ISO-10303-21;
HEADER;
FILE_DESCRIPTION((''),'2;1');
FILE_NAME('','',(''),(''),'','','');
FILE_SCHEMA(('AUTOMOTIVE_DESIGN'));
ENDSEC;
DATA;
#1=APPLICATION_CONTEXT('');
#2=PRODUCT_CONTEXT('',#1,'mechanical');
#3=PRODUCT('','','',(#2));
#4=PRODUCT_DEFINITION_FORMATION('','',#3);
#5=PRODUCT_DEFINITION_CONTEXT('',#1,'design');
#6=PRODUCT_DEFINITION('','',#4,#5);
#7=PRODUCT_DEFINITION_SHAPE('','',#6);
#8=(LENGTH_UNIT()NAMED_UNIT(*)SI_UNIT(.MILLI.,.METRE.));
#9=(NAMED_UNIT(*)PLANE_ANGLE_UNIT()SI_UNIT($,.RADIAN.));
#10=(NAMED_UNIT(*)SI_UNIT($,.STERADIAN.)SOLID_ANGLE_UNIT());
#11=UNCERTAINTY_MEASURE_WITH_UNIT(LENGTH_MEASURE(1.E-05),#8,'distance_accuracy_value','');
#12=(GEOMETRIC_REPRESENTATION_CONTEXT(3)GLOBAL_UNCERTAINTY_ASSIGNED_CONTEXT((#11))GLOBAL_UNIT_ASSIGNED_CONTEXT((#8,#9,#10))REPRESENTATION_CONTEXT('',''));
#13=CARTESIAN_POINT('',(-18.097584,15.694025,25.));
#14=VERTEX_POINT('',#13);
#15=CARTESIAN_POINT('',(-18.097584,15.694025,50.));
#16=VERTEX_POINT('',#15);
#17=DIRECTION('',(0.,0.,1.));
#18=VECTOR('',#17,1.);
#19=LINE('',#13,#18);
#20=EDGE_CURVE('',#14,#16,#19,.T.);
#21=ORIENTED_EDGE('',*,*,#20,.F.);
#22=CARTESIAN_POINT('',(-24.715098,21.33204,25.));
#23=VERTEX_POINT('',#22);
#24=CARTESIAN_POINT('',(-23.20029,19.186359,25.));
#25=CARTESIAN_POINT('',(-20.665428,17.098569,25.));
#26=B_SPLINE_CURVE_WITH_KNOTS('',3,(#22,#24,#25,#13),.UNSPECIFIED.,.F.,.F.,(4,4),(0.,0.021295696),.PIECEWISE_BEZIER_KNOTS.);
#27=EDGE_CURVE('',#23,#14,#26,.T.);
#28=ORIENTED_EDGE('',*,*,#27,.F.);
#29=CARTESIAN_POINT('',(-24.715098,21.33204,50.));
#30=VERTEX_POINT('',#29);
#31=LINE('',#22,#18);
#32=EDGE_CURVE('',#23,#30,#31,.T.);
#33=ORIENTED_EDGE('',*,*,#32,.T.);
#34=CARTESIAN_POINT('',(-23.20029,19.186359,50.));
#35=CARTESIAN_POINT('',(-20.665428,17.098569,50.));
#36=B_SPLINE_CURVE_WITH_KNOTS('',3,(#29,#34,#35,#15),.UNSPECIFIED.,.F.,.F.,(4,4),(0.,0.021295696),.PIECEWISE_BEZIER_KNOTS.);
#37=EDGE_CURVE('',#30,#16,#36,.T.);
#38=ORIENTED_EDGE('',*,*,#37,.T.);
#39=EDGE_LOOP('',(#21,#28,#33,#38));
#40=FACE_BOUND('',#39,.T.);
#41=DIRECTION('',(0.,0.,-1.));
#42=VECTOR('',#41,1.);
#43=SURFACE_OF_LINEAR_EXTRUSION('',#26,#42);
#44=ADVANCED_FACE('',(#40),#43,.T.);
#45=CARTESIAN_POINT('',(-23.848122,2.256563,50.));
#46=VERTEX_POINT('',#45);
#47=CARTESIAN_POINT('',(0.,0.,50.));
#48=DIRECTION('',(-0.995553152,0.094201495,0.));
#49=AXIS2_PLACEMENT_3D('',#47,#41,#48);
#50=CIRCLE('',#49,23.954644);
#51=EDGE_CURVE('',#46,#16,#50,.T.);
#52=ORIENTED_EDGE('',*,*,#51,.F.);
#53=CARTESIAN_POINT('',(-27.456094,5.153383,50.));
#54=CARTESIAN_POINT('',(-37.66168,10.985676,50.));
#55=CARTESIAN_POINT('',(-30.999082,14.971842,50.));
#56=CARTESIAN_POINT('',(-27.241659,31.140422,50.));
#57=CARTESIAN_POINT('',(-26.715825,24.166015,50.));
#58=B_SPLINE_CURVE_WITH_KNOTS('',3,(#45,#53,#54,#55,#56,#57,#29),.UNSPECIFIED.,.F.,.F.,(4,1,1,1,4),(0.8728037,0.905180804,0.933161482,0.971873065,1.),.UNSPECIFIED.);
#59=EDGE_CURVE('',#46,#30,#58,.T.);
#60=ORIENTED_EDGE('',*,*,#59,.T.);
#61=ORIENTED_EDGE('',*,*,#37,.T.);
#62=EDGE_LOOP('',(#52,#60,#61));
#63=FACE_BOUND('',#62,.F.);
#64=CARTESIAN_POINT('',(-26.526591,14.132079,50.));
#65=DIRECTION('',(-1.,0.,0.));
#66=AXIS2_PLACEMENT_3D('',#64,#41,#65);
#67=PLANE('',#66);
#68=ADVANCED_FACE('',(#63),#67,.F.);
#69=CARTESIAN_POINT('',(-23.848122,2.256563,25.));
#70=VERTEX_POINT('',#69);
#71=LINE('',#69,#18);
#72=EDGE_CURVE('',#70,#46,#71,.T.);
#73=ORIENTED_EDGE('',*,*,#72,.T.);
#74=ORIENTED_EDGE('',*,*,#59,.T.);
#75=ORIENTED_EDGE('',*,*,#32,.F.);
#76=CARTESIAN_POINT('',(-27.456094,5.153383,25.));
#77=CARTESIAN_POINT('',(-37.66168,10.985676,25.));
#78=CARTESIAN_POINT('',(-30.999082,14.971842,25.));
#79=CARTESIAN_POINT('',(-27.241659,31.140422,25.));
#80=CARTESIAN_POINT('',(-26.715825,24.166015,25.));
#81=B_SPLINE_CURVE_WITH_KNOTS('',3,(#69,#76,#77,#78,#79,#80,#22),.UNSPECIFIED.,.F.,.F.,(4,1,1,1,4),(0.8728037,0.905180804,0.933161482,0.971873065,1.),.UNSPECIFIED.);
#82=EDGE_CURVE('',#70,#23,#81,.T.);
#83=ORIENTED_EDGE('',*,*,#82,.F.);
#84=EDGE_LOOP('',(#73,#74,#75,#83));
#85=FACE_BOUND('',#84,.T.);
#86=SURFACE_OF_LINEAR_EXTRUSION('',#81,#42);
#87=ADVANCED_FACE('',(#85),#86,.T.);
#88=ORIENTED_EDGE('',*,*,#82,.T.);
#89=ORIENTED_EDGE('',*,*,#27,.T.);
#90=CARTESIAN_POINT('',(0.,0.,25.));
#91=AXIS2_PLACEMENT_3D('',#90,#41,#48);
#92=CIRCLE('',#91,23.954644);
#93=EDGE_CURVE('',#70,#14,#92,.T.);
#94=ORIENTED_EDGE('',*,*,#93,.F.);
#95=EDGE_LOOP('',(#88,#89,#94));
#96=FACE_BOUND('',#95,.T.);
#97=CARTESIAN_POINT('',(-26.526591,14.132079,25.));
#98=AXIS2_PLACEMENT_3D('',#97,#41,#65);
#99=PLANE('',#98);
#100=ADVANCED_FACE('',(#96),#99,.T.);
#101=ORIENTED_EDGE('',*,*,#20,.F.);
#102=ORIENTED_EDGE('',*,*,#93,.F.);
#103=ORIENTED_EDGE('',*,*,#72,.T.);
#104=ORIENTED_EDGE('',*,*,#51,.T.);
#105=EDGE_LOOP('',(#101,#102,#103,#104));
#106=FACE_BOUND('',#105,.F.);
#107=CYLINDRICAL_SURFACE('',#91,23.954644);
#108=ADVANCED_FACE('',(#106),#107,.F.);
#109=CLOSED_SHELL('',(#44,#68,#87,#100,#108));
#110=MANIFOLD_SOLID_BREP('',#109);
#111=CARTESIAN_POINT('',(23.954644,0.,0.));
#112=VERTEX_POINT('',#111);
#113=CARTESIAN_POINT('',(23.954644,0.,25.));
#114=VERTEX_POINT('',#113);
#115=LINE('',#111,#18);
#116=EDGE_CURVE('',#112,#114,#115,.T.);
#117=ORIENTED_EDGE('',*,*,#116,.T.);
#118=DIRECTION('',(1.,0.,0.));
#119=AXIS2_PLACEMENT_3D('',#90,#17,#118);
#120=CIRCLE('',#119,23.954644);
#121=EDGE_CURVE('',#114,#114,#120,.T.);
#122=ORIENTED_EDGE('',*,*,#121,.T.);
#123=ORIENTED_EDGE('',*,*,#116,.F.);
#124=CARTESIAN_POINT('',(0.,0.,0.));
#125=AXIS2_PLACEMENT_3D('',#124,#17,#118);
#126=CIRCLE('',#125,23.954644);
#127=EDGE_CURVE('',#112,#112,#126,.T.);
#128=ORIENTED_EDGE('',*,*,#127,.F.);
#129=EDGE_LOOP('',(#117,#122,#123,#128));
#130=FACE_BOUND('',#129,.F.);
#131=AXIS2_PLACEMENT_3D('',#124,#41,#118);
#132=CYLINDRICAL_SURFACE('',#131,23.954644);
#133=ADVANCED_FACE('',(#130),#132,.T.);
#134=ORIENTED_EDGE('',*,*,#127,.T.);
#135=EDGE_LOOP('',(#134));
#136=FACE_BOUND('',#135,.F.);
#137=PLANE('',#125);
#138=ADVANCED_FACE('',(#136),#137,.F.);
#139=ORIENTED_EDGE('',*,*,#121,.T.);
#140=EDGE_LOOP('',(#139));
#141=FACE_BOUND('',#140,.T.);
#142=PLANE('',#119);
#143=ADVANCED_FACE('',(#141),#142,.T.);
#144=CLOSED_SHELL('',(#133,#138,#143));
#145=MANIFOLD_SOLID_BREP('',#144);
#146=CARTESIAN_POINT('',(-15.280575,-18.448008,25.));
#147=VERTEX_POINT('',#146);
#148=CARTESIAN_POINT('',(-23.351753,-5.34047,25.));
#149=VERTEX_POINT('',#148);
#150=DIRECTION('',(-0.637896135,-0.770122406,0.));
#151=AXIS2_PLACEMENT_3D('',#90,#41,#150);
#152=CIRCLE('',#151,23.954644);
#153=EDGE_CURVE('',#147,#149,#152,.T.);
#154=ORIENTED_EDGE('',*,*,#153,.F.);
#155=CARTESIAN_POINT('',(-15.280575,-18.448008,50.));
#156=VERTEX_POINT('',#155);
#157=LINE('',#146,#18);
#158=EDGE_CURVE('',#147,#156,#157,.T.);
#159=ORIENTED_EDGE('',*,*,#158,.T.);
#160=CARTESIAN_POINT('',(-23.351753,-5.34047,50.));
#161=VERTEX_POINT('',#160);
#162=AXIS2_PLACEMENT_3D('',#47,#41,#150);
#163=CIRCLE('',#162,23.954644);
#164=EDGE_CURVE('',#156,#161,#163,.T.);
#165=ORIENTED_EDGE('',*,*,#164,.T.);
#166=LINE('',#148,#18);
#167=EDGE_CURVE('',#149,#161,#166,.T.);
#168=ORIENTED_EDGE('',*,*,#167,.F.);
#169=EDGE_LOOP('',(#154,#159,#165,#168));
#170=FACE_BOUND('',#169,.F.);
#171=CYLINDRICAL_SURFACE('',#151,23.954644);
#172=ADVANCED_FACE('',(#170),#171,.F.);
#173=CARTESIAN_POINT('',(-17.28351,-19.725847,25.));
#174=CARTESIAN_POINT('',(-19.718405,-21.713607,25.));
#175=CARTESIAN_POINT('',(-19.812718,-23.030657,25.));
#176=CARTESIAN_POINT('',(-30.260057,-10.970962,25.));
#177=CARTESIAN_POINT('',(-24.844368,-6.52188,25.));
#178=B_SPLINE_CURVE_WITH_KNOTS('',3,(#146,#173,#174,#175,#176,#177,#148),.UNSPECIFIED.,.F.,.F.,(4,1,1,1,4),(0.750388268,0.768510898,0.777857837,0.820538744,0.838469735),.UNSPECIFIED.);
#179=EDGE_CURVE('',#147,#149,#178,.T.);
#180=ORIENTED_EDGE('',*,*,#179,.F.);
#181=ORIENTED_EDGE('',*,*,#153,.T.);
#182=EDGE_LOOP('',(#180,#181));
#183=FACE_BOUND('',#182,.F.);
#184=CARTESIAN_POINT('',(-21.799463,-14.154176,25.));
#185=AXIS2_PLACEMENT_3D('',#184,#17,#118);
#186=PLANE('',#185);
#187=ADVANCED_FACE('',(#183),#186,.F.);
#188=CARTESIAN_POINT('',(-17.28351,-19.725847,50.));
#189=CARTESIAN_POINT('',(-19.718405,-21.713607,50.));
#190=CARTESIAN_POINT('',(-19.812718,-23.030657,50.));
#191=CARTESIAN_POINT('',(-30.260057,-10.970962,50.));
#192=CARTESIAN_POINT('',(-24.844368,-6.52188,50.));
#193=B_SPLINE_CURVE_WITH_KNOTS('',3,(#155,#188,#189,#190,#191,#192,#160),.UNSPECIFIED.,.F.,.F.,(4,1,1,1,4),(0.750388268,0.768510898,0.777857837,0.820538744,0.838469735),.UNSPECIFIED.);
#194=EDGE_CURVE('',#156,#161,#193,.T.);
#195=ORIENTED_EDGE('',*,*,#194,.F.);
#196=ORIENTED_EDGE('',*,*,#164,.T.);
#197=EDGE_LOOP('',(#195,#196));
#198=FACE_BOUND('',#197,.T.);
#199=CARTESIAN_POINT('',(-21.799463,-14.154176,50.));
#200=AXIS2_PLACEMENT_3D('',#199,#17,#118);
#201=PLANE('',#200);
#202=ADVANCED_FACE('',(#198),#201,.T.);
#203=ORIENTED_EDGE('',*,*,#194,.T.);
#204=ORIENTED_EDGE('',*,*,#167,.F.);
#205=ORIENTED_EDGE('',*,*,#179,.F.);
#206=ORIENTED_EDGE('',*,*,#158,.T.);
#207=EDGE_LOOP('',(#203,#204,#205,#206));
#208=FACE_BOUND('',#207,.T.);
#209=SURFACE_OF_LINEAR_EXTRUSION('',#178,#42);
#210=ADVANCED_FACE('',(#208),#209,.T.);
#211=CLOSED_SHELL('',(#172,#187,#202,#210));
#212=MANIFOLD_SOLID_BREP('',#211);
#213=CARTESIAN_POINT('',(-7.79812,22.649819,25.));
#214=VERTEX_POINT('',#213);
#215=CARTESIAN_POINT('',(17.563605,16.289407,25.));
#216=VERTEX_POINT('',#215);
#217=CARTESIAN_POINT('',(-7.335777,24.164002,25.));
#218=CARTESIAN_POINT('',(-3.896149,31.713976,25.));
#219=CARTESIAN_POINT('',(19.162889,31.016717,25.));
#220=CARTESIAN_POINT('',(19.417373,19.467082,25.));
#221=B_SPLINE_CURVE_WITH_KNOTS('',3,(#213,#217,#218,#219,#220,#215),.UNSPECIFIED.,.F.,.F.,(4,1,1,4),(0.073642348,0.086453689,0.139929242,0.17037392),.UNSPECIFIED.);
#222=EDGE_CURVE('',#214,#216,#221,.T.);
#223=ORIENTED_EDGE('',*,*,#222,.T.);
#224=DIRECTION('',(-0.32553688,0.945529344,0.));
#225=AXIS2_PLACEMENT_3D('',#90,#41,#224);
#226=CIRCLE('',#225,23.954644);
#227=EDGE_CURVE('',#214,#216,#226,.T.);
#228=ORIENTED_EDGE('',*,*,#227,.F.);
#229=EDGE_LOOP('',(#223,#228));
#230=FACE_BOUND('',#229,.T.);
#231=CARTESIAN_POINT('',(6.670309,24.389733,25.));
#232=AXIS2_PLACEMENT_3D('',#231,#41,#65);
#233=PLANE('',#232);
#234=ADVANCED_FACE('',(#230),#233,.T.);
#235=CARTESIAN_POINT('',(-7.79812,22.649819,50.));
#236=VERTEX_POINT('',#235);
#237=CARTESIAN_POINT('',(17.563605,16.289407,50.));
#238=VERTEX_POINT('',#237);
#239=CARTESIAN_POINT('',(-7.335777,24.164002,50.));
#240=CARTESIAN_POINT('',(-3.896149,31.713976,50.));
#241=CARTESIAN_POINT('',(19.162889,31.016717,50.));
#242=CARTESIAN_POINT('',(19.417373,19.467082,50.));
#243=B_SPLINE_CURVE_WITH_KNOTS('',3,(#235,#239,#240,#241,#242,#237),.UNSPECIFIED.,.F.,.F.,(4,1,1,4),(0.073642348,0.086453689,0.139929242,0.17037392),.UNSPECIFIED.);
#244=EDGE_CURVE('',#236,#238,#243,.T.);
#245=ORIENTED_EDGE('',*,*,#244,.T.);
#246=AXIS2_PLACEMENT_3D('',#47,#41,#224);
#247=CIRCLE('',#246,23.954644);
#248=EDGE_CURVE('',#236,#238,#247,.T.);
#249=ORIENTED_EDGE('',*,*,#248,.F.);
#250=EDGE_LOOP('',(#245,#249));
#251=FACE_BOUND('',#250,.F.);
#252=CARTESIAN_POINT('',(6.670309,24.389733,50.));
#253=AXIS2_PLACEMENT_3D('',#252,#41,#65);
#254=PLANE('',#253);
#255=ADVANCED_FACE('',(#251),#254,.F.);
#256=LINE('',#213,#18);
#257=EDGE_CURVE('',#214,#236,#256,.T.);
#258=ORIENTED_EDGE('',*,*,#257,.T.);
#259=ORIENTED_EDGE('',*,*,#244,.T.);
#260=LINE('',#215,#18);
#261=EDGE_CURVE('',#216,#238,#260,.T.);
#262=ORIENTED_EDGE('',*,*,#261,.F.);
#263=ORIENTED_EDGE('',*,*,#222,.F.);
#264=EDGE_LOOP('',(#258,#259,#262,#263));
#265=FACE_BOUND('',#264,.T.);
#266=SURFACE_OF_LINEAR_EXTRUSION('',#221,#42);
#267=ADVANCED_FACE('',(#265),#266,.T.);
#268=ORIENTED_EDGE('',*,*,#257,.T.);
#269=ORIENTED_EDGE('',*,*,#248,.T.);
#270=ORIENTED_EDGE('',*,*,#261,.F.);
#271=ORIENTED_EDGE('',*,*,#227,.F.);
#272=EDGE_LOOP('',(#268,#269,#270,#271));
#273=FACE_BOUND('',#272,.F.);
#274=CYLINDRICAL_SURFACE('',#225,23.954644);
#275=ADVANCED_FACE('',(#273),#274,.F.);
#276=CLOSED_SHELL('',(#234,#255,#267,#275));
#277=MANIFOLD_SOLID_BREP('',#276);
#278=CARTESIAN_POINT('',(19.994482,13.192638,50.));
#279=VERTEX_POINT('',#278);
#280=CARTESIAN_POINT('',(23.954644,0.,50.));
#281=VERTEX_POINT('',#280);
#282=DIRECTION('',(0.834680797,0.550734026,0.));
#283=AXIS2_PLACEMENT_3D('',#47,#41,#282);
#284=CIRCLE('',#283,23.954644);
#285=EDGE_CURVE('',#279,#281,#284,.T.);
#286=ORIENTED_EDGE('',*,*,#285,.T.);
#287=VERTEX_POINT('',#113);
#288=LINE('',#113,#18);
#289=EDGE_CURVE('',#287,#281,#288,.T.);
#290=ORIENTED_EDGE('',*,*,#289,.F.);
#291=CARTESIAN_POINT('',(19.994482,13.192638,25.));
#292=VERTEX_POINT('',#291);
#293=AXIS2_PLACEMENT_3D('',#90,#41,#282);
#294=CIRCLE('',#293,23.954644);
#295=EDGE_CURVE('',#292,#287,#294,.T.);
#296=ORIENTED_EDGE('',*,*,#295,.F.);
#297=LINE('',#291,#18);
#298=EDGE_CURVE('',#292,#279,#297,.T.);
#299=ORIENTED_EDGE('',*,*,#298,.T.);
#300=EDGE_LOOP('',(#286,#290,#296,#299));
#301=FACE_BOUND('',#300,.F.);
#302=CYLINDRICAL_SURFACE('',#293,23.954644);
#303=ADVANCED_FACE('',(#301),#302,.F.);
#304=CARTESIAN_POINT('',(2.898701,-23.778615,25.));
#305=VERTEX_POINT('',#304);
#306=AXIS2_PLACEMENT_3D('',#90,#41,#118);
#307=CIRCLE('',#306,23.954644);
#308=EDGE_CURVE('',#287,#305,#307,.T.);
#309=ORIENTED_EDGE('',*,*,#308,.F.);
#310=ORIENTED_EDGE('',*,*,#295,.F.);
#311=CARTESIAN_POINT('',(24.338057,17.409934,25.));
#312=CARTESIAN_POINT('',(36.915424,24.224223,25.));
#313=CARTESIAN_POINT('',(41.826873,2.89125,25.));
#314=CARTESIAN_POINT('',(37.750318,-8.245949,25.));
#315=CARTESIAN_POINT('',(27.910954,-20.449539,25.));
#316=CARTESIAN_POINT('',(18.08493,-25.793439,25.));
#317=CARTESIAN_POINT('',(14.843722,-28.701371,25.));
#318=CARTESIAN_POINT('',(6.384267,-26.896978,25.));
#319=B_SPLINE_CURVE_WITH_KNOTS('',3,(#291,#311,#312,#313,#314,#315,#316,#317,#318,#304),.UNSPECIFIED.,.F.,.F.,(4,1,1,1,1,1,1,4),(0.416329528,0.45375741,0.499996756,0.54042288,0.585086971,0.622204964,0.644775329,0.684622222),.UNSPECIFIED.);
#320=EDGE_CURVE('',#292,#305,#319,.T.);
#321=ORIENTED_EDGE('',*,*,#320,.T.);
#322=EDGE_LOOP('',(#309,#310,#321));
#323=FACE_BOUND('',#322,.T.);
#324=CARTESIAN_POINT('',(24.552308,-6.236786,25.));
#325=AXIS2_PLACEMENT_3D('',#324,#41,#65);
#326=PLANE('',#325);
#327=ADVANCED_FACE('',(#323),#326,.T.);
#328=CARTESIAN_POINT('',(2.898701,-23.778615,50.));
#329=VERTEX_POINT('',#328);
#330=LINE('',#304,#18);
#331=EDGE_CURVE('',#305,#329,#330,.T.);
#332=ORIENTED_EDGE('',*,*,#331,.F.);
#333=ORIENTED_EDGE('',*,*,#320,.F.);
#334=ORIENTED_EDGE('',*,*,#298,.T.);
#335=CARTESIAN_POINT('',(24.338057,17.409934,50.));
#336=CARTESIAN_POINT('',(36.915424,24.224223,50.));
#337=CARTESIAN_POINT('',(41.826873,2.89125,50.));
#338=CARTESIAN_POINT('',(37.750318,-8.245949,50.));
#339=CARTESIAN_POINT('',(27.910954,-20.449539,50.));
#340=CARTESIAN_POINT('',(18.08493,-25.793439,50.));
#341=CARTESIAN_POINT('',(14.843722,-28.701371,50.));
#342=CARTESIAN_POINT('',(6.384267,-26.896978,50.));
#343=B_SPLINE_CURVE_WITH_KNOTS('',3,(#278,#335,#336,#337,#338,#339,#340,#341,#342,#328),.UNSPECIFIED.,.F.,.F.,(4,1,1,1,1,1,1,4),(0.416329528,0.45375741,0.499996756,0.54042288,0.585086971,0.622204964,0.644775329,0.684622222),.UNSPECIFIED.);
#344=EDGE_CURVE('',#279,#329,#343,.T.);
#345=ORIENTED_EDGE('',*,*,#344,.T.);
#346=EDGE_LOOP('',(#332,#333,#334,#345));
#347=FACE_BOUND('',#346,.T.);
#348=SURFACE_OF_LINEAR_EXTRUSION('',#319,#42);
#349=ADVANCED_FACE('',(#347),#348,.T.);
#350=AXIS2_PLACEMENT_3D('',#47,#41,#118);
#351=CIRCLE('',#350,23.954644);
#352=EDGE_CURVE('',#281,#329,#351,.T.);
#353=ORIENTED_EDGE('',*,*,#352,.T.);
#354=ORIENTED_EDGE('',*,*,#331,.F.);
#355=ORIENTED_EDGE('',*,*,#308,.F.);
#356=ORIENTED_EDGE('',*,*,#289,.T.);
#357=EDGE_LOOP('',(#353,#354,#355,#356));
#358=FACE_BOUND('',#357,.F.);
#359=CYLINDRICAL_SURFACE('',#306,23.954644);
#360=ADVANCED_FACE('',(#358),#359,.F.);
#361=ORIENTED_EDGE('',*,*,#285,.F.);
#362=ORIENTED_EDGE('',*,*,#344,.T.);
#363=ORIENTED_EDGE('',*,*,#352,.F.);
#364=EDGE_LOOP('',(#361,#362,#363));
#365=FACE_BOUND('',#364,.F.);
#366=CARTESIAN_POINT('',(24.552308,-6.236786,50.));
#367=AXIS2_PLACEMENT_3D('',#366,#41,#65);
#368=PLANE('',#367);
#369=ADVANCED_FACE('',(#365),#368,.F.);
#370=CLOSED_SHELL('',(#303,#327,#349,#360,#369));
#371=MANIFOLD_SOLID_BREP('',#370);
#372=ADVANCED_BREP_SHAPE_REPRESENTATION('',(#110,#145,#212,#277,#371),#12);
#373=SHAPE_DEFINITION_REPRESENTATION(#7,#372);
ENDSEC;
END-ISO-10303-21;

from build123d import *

# Parameters (mm, degrees)
F0_R     = 23.9546443397
F1_DEPTH = 25
F3_DEPTH = 25


with BuildPart() as f1:
    # F0 (on Top) → F1 (new body)
    with BuildSketch(Plane.XY):
        Circle(F0_R)
    extrude(amount=F1_DEPTH)


with BuildPart() as f3:
    # F2 (on face) → F3 (new body)
    with BuildSketch(Plane.XY.offset(25)):
        with BuildLine():
            add(Edge.make_bspline(
                [(-24.7150976211, 21.3320404291), (-23.2002903756, 19.186358509), (-20.6654275959, 17.0985687847), (-18.0975842985, 15.6940252326)],
                knots=[0, 0, 0, 0, 0.0212956958, 0.0212956958, 0.0212956958, 0.0212956958], degree=3))
            add(Edge.make_bspline(
                [(-23.8481216764, 2.2565633053), (-27.4560942193, 5.1533829377), (-37.6616802367, 10.9856760089), (-30.9990816465, 14.9718419563), (-27.2416588005, 31.1404224602), (-26.7158251233, 24.1660147459), (-24.7150976211, 21.3320404291)],
                knots=[0.8728036995, 0.8728036995, 0.8728036995, 0.8728036995, 0.9051808039, 0.9331614819, 0.9718730655, 1, 1, 1, 1], degree=3))
            ThreePointArc((-23.8481216764, 2.2565633053), (-22.0227588688, 9.4245995803), (-18.0975842985, 15.6940252326))
        make_face()
    extrude(amount=F3_DEPTH)


with BuildPart() as f3b:
    # F2 (on face) → F3, piece 2 (new body)
    with BuildSketch(Plane.XY.offset(25)):
        with BuildLine():
            add(Edge.make_bspline(
                [(-7.798120177, 22.6498191416), (-7.3357771288, 24.1640022303), (-3.8961489999, 31.7139758191), (19.1628892215, 31.0167173164), (19.4173730169, 19.4670823497), (17.5636049801, 16.2894065437)],
                knots=[0.0736423478, 0.0736423478, 0.0736423478, 0.0736423478, 0.0864536893, 0.1399292421, 0.1703739198, 0.1703739198, 0.1703739198, 0.1703739198], degree=3))
            ThreePointArc((-7.798120177, 22.6498191416), (5.8270820712, 23.2351049057), (17.5636049801, 16.2894065437))
        make_face()
    extrude(amount=F3_DEPTH)


with BuildPart() as f3c:
    # F2 (on face) → F3, piece 3 (new body)
    with BuildSketch(Plane.XY.offset(25)):
        with BuildLine():
            ThreePointArc((-15.2805750437, -18.4480083418), (-20.3976980009, -12.5602110535), (-23.3517529855, -5.3404698245))
            add(Edge.make_bspline(
                [(-15.2805750437, -18.4480083418), (-17.2835096748, -19.7258473209), (-19.7184054128, -21.7136067449), (-19.8127175625, -23.0306574397), (-30.2600566586, -10.9709624007), (-24.8443676836, -6.5218797636), (-23.3517529855, -5.3404698245)],
                knots=[0.7503882685, 0.7503882685, 0.7503882685, 0.7503882685, 0.7685108982, 0.7778578374, 0.8205387441, 0.8384697352, 0.8384697352, 0.8384697352, 0.8384697352], degree=3))
        make_face()
    extrude(amount=F3_DEPTH)


with BuildPart() as f3d:
    # F2 (on face) → F3, piece 4 (new body)
    with BuildSketch(Plane.XY.offset(25)):
        with BuildLine():
            add(Edge.make_bspline(
                [(19.9944816312, 13.1926377098), (24.3380571596, 17.4099341736), (36.9154241585, 24.2242234648), (41.826872761, 2.8912504159), (37.7503183518, -8.245948549), (27.9109539258, -20.4495389333), (18.0849304531, -25.7934387672), (14.8437220967, -28.7013705154), (6.3842665907, -26.8969779377), (2.8987011595, -23.7786146996)],
                knots=[0.4163295284, 0.4163295284, 0.4163295284, 0.4163295284, 0.4537574098, 0.499996756, 0.5404228804, 0.5850869705, 0.622204964, 0.6447753293, 0.6846222223, 0.6846222223, 0.6846222223, 0.6846222223], degree=3))
            ThreePointArc((19.9944816312, 13.1926377098), (22.9432526212, 6.887099869), (23.9546443397, 0))
            ThreePointArc((23.9546443397, 0), (17.9340784648, -15.8806112937), (2.8987011595, -23.7786146996))
        make_face()
    extrude(amount=F3_DEPTH)


solid = Compound([f1.part, f3.part, f3b.part, f3c.part, f3d.part])
